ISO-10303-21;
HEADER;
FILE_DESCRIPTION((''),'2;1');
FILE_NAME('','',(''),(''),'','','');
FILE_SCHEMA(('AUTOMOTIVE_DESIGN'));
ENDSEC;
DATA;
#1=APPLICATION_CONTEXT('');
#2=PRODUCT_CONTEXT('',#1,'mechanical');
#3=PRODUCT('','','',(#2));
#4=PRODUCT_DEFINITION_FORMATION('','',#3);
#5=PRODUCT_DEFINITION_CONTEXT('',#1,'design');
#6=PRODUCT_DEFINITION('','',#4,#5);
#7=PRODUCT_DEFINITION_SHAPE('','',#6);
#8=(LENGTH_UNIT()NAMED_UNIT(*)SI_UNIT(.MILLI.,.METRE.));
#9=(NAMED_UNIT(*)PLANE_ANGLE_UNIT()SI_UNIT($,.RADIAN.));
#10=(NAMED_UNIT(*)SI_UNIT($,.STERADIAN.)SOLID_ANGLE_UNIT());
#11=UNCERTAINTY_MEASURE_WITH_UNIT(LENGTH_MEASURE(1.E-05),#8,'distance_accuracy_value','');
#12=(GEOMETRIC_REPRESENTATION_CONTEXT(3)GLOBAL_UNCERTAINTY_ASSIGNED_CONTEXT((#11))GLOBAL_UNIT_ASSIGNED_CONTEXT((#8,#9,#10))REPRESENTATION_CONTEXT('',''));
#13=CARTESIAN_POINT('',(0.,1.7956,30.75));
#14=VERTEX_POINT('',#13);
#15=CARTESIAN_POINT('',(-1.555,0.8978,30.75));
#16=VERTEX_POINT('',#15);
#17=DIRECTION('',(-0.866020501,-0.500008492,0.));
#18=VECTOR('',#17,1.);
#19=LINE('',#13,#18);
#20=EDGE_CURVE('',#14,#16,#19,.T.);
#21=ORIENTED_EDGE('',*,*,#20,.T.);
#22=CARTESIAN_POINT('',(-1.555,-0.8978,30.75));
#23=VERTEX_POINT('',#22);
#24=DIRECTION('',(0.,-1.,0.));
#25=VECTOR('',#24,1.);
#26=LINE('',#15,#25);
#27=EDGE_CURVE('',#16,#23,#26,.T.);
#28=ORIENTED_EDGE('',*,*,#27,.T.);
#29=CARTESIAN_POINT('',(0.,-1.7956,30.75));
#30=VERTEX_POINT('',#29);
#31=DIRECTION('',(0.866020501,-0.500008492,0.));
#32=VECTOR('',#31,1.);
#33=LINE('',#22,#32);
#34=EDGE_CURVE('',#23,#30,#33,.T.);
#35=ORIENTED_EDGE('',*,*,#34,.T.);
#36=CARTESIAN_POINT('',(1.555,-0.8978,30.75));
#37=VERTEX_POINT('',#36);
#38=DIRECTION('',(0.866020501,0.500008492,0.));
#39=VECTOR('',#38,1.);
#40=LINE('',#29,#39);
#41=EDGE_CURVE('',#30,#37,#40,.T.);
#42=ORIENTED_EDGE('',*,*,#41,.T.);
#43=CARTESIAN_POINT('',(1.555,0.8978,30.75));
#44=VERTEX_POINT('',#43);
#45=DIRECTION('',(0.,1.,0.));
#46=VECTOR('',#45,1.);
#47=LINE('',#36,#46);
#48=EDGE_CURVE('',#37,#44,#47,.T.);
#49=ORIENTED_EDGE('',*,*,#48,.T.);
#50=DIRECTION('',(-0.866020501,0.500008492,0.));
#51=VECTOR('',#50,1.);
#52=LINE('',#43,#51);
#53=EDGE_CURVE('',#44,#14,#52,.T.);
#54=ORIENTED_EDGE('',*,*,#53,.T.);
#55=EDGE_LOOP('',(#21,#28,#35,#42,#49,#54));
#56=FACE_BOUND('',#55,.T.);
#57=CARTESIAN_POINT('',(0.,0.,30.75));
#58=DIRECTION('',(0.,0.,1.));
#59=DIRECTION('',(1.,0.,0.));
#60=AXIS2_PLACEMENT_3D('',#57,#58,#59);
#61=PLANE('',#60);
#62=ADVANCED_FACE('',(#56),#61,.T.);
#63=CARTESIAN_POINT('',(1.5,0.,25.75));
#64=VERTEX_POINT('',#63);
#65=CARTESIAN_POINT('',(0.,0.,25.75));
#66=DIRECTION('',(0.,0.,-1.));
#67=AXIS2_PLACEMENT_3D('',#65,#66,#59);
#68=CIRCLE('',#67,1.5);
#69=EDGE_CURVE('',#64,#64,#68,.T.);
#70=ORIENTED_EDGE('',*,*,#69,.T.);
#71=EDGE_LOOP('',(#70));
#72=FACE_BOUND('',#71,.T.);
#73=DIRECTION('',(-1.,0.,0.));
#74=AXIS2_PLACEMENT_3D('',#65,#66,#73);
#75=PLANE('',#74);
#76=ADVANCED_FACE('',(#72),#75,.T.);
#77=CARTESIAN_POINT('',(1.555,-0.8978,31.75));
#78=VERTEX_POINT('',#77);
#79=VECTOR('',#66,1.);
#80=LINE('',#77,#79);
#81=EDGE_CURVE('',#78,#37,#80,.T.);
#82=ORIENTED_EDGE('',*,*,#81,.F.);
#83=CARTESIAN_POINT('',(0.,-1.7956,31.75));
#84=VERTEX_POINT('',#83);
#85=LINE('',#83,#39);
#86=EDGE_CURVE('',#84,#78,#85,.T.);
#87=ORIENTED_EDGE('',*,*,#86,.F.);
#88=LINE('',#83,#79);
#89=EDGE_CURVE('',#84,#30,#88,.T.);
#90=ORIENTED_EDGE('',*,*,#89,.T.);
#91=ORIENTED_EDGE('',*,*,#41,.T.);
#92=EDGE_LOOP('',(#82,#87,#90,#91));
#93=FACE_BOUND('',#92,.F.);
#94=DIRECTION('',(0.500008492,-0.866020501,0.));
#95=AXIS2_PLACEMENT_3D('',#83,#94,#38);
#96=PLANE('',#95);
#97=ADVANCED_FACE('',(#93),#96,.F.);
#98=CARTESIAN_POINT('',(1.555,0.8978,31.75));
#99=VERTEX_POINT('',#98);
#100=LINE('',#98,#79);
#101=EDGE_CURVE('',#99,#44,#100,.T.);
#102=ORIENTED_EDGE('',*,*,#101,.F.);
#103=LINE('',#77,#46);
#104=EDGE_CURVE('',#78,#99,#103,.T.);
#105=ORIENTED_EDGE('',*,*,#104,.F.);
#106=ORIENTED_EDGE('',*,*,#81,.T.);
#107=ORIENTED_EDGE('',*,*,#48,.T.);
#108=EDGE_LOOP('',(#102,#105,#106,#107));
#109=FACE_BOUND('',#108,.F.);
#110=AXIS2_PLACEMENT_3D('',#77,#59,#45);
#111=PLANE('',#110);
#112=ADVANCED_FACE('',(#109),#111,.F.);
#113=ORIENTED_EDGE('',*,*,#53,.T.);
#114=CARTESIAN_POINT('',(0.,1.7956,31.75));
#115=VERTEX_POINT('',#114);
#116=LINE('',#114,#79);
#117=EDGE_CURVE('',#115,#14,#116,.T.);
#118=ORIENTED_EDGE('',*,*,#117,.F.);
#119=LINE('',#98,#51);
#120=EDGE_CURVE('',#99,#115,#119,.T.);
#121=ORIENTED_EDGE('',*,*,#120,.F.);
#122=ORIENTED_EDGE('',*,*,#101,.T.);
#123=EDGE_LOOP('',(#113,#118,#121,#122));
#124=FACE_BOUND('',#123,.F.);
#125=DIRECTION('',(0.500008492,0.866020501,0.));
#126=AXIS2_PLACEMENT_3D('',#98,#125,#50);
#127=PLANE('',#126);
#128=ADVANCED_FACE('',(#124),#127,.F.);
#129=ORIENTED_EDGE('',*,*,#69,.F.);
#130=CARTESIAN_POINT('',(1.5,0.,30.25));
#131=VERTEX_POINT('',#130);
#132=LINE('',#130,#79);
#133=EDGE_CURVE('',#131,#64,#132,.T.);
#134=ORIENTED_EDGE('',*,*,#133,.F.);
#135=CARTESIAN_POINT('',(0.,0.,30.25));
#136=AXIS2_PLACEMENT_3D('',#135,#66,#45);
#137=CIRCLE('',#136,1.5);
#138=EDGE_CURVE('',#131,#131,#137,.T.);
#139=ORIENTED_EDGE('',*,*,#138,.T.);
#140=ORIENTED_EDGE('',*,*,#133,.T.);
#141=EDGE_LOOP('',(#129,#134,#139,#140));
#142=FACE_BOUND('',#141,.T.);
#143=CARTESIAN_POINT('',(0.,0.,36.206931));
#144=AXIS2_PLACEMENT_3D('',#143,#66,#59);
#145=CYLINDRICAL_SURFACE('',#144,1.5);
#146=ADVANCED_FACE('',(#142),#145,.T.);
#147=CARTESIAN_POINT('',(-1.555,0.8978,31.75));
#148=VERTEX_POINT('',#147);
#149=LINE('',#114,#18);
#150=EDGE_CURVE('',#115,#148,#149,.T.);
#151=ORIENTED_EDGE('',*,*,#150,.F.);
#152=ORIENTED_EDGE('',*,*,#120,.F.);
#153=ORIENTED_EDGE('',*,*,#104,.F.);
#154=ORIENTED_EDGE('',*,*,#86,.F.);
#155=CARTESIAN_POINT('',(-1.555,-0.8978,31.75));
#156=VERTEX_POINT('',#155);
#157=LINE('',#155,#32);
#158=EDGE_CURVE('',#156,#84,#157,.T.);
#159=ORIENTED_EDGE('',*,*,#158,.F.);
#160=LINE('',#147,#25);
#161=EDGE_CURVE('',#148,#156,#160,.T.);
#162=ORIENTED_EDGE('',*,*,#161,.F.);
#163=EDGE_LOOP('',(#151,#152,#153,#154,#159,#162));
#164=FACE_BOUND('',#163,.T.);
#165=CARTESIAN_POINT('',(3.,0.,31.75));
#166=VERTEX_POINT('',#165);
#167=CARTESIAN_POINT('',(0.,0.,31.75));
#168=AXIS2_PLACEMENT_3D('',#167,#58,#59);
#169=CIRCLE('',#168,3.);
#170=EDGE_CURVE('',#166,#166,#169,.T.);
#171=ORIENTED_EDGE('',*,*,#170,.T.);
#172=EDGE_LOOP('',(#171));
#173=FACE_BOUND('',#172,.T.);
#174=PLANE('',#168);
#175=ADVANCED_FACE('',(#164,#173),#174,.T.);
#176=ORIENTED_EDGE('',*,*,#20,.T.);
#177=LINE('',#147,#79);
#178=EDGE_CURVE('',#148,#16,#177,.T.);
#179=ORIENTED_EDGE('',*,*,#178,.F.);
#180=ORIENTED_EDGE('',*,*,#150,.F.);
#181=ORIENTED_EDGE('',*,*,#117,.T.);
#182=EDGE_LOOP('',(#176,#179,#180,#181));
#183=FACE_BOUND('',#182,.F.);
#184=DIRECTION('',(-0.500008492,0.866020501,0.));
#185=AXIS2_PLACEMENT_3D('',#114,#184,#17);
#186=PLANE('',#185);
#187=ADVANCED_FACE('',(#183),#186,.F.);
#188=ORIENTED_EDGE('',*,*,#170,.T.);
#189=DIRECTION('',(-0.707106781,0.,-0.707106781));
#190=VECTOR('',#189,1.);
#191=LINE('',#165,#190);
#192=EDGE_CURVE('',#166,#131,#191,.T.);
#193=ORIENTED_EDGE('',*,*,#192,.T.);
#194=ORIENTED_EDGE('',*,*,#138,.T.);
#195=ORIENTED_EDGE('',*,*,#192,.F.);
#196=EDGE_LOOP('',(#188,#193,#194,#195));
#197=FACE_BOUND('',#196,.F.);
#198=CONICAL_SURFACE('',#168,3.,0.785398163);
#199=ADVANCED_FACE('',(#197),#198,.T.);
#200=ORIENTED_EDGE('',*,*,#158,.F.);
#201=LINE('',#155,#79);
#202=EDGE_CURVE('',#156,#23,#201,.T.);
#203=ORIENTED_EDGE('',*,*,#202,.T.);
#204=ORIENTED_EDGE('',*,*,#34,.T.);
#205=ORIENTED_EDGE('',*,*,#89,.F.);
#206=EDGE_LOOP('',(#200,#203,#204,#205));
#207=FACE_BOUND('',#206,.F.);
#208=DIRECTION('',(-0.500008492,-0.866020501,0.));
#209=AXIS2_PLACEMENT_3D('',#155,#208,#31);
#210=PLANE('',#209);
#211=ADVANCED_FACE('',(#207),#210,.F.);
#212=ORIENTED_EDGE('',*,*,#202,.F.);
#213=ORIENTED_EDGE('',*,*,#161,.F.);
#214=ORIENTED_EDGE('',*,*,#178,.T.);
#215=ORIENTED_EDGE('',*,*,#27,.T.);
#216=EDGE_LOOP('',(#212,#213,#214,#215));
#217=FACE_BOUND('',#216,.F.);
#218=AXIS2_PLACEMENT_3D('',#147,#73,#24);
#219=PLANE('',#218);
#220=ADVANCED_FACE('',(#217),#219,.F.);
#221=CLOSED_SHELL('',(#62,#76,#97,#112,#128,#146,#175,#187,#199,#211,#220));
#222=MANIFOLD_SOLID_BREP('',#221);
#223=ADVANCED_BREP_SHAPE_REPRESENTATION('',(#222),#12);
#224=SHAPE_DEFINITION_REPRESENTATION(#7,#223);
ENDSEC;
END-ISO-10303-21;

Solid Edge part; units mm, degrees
sketch "Sketch1" plane through (0, 0, 0) normal (0, 0, 1) x (1, 0, 0)
  circle A0 centre (0, 0) radius 1.5
extrude "Protrusion1" add sketch "Sketch1" along normal blind 30
sketch "Sketch2" plane through (0, 0, 30) normal (0, 0, 1) x (1, 0, 0)
  circle A0 centre (0, 0) radius 3
extrude "ExtrudedProtrusion_2" add sketch "Sketch2" along normal blind 1.75
chamfer "Chamfer_1" distance 1.75 angle 45 1 edges at (-3, 0, 30)
sketch "Sketch3" plane through (0, 0, 31.75) normal (0, 0, 1) x (0, 1, 0)
  line L0 (0.8978, -1.555) -> (1.7956, 0)
  line L1 (1.7956, 0) -> (0.8978, 1.555)
  line L2 (0.8978, 1.555) -> (-0.8978, 1.555)
  line L3 (-0.8978, 1.555) -> (-1.7956, 0)
  line L4 (-1.7956, 0) -> (-0.8978, -1.555)
  line L5 (-0.8978, -1.555) -> (0.8978, -1.555)
extrude "ExtrudedCutout_1" cut sketch "Sketch3" against normal blind 1
sketch "Sketch4" plane through (0, 0, 0) normal (0, 0, -1) x (0, 1, 0)
  circle A0 centre (0, 0) radius 1.9215
extrude "ExtrudedCutout_2" cut sketch "Sketch4" against normal blind 25.75
revolve "RevolvedCutout1" [suppressed]
fillet "Round_1" [suppressed]
properties material "Iron, grey cast type 20"
